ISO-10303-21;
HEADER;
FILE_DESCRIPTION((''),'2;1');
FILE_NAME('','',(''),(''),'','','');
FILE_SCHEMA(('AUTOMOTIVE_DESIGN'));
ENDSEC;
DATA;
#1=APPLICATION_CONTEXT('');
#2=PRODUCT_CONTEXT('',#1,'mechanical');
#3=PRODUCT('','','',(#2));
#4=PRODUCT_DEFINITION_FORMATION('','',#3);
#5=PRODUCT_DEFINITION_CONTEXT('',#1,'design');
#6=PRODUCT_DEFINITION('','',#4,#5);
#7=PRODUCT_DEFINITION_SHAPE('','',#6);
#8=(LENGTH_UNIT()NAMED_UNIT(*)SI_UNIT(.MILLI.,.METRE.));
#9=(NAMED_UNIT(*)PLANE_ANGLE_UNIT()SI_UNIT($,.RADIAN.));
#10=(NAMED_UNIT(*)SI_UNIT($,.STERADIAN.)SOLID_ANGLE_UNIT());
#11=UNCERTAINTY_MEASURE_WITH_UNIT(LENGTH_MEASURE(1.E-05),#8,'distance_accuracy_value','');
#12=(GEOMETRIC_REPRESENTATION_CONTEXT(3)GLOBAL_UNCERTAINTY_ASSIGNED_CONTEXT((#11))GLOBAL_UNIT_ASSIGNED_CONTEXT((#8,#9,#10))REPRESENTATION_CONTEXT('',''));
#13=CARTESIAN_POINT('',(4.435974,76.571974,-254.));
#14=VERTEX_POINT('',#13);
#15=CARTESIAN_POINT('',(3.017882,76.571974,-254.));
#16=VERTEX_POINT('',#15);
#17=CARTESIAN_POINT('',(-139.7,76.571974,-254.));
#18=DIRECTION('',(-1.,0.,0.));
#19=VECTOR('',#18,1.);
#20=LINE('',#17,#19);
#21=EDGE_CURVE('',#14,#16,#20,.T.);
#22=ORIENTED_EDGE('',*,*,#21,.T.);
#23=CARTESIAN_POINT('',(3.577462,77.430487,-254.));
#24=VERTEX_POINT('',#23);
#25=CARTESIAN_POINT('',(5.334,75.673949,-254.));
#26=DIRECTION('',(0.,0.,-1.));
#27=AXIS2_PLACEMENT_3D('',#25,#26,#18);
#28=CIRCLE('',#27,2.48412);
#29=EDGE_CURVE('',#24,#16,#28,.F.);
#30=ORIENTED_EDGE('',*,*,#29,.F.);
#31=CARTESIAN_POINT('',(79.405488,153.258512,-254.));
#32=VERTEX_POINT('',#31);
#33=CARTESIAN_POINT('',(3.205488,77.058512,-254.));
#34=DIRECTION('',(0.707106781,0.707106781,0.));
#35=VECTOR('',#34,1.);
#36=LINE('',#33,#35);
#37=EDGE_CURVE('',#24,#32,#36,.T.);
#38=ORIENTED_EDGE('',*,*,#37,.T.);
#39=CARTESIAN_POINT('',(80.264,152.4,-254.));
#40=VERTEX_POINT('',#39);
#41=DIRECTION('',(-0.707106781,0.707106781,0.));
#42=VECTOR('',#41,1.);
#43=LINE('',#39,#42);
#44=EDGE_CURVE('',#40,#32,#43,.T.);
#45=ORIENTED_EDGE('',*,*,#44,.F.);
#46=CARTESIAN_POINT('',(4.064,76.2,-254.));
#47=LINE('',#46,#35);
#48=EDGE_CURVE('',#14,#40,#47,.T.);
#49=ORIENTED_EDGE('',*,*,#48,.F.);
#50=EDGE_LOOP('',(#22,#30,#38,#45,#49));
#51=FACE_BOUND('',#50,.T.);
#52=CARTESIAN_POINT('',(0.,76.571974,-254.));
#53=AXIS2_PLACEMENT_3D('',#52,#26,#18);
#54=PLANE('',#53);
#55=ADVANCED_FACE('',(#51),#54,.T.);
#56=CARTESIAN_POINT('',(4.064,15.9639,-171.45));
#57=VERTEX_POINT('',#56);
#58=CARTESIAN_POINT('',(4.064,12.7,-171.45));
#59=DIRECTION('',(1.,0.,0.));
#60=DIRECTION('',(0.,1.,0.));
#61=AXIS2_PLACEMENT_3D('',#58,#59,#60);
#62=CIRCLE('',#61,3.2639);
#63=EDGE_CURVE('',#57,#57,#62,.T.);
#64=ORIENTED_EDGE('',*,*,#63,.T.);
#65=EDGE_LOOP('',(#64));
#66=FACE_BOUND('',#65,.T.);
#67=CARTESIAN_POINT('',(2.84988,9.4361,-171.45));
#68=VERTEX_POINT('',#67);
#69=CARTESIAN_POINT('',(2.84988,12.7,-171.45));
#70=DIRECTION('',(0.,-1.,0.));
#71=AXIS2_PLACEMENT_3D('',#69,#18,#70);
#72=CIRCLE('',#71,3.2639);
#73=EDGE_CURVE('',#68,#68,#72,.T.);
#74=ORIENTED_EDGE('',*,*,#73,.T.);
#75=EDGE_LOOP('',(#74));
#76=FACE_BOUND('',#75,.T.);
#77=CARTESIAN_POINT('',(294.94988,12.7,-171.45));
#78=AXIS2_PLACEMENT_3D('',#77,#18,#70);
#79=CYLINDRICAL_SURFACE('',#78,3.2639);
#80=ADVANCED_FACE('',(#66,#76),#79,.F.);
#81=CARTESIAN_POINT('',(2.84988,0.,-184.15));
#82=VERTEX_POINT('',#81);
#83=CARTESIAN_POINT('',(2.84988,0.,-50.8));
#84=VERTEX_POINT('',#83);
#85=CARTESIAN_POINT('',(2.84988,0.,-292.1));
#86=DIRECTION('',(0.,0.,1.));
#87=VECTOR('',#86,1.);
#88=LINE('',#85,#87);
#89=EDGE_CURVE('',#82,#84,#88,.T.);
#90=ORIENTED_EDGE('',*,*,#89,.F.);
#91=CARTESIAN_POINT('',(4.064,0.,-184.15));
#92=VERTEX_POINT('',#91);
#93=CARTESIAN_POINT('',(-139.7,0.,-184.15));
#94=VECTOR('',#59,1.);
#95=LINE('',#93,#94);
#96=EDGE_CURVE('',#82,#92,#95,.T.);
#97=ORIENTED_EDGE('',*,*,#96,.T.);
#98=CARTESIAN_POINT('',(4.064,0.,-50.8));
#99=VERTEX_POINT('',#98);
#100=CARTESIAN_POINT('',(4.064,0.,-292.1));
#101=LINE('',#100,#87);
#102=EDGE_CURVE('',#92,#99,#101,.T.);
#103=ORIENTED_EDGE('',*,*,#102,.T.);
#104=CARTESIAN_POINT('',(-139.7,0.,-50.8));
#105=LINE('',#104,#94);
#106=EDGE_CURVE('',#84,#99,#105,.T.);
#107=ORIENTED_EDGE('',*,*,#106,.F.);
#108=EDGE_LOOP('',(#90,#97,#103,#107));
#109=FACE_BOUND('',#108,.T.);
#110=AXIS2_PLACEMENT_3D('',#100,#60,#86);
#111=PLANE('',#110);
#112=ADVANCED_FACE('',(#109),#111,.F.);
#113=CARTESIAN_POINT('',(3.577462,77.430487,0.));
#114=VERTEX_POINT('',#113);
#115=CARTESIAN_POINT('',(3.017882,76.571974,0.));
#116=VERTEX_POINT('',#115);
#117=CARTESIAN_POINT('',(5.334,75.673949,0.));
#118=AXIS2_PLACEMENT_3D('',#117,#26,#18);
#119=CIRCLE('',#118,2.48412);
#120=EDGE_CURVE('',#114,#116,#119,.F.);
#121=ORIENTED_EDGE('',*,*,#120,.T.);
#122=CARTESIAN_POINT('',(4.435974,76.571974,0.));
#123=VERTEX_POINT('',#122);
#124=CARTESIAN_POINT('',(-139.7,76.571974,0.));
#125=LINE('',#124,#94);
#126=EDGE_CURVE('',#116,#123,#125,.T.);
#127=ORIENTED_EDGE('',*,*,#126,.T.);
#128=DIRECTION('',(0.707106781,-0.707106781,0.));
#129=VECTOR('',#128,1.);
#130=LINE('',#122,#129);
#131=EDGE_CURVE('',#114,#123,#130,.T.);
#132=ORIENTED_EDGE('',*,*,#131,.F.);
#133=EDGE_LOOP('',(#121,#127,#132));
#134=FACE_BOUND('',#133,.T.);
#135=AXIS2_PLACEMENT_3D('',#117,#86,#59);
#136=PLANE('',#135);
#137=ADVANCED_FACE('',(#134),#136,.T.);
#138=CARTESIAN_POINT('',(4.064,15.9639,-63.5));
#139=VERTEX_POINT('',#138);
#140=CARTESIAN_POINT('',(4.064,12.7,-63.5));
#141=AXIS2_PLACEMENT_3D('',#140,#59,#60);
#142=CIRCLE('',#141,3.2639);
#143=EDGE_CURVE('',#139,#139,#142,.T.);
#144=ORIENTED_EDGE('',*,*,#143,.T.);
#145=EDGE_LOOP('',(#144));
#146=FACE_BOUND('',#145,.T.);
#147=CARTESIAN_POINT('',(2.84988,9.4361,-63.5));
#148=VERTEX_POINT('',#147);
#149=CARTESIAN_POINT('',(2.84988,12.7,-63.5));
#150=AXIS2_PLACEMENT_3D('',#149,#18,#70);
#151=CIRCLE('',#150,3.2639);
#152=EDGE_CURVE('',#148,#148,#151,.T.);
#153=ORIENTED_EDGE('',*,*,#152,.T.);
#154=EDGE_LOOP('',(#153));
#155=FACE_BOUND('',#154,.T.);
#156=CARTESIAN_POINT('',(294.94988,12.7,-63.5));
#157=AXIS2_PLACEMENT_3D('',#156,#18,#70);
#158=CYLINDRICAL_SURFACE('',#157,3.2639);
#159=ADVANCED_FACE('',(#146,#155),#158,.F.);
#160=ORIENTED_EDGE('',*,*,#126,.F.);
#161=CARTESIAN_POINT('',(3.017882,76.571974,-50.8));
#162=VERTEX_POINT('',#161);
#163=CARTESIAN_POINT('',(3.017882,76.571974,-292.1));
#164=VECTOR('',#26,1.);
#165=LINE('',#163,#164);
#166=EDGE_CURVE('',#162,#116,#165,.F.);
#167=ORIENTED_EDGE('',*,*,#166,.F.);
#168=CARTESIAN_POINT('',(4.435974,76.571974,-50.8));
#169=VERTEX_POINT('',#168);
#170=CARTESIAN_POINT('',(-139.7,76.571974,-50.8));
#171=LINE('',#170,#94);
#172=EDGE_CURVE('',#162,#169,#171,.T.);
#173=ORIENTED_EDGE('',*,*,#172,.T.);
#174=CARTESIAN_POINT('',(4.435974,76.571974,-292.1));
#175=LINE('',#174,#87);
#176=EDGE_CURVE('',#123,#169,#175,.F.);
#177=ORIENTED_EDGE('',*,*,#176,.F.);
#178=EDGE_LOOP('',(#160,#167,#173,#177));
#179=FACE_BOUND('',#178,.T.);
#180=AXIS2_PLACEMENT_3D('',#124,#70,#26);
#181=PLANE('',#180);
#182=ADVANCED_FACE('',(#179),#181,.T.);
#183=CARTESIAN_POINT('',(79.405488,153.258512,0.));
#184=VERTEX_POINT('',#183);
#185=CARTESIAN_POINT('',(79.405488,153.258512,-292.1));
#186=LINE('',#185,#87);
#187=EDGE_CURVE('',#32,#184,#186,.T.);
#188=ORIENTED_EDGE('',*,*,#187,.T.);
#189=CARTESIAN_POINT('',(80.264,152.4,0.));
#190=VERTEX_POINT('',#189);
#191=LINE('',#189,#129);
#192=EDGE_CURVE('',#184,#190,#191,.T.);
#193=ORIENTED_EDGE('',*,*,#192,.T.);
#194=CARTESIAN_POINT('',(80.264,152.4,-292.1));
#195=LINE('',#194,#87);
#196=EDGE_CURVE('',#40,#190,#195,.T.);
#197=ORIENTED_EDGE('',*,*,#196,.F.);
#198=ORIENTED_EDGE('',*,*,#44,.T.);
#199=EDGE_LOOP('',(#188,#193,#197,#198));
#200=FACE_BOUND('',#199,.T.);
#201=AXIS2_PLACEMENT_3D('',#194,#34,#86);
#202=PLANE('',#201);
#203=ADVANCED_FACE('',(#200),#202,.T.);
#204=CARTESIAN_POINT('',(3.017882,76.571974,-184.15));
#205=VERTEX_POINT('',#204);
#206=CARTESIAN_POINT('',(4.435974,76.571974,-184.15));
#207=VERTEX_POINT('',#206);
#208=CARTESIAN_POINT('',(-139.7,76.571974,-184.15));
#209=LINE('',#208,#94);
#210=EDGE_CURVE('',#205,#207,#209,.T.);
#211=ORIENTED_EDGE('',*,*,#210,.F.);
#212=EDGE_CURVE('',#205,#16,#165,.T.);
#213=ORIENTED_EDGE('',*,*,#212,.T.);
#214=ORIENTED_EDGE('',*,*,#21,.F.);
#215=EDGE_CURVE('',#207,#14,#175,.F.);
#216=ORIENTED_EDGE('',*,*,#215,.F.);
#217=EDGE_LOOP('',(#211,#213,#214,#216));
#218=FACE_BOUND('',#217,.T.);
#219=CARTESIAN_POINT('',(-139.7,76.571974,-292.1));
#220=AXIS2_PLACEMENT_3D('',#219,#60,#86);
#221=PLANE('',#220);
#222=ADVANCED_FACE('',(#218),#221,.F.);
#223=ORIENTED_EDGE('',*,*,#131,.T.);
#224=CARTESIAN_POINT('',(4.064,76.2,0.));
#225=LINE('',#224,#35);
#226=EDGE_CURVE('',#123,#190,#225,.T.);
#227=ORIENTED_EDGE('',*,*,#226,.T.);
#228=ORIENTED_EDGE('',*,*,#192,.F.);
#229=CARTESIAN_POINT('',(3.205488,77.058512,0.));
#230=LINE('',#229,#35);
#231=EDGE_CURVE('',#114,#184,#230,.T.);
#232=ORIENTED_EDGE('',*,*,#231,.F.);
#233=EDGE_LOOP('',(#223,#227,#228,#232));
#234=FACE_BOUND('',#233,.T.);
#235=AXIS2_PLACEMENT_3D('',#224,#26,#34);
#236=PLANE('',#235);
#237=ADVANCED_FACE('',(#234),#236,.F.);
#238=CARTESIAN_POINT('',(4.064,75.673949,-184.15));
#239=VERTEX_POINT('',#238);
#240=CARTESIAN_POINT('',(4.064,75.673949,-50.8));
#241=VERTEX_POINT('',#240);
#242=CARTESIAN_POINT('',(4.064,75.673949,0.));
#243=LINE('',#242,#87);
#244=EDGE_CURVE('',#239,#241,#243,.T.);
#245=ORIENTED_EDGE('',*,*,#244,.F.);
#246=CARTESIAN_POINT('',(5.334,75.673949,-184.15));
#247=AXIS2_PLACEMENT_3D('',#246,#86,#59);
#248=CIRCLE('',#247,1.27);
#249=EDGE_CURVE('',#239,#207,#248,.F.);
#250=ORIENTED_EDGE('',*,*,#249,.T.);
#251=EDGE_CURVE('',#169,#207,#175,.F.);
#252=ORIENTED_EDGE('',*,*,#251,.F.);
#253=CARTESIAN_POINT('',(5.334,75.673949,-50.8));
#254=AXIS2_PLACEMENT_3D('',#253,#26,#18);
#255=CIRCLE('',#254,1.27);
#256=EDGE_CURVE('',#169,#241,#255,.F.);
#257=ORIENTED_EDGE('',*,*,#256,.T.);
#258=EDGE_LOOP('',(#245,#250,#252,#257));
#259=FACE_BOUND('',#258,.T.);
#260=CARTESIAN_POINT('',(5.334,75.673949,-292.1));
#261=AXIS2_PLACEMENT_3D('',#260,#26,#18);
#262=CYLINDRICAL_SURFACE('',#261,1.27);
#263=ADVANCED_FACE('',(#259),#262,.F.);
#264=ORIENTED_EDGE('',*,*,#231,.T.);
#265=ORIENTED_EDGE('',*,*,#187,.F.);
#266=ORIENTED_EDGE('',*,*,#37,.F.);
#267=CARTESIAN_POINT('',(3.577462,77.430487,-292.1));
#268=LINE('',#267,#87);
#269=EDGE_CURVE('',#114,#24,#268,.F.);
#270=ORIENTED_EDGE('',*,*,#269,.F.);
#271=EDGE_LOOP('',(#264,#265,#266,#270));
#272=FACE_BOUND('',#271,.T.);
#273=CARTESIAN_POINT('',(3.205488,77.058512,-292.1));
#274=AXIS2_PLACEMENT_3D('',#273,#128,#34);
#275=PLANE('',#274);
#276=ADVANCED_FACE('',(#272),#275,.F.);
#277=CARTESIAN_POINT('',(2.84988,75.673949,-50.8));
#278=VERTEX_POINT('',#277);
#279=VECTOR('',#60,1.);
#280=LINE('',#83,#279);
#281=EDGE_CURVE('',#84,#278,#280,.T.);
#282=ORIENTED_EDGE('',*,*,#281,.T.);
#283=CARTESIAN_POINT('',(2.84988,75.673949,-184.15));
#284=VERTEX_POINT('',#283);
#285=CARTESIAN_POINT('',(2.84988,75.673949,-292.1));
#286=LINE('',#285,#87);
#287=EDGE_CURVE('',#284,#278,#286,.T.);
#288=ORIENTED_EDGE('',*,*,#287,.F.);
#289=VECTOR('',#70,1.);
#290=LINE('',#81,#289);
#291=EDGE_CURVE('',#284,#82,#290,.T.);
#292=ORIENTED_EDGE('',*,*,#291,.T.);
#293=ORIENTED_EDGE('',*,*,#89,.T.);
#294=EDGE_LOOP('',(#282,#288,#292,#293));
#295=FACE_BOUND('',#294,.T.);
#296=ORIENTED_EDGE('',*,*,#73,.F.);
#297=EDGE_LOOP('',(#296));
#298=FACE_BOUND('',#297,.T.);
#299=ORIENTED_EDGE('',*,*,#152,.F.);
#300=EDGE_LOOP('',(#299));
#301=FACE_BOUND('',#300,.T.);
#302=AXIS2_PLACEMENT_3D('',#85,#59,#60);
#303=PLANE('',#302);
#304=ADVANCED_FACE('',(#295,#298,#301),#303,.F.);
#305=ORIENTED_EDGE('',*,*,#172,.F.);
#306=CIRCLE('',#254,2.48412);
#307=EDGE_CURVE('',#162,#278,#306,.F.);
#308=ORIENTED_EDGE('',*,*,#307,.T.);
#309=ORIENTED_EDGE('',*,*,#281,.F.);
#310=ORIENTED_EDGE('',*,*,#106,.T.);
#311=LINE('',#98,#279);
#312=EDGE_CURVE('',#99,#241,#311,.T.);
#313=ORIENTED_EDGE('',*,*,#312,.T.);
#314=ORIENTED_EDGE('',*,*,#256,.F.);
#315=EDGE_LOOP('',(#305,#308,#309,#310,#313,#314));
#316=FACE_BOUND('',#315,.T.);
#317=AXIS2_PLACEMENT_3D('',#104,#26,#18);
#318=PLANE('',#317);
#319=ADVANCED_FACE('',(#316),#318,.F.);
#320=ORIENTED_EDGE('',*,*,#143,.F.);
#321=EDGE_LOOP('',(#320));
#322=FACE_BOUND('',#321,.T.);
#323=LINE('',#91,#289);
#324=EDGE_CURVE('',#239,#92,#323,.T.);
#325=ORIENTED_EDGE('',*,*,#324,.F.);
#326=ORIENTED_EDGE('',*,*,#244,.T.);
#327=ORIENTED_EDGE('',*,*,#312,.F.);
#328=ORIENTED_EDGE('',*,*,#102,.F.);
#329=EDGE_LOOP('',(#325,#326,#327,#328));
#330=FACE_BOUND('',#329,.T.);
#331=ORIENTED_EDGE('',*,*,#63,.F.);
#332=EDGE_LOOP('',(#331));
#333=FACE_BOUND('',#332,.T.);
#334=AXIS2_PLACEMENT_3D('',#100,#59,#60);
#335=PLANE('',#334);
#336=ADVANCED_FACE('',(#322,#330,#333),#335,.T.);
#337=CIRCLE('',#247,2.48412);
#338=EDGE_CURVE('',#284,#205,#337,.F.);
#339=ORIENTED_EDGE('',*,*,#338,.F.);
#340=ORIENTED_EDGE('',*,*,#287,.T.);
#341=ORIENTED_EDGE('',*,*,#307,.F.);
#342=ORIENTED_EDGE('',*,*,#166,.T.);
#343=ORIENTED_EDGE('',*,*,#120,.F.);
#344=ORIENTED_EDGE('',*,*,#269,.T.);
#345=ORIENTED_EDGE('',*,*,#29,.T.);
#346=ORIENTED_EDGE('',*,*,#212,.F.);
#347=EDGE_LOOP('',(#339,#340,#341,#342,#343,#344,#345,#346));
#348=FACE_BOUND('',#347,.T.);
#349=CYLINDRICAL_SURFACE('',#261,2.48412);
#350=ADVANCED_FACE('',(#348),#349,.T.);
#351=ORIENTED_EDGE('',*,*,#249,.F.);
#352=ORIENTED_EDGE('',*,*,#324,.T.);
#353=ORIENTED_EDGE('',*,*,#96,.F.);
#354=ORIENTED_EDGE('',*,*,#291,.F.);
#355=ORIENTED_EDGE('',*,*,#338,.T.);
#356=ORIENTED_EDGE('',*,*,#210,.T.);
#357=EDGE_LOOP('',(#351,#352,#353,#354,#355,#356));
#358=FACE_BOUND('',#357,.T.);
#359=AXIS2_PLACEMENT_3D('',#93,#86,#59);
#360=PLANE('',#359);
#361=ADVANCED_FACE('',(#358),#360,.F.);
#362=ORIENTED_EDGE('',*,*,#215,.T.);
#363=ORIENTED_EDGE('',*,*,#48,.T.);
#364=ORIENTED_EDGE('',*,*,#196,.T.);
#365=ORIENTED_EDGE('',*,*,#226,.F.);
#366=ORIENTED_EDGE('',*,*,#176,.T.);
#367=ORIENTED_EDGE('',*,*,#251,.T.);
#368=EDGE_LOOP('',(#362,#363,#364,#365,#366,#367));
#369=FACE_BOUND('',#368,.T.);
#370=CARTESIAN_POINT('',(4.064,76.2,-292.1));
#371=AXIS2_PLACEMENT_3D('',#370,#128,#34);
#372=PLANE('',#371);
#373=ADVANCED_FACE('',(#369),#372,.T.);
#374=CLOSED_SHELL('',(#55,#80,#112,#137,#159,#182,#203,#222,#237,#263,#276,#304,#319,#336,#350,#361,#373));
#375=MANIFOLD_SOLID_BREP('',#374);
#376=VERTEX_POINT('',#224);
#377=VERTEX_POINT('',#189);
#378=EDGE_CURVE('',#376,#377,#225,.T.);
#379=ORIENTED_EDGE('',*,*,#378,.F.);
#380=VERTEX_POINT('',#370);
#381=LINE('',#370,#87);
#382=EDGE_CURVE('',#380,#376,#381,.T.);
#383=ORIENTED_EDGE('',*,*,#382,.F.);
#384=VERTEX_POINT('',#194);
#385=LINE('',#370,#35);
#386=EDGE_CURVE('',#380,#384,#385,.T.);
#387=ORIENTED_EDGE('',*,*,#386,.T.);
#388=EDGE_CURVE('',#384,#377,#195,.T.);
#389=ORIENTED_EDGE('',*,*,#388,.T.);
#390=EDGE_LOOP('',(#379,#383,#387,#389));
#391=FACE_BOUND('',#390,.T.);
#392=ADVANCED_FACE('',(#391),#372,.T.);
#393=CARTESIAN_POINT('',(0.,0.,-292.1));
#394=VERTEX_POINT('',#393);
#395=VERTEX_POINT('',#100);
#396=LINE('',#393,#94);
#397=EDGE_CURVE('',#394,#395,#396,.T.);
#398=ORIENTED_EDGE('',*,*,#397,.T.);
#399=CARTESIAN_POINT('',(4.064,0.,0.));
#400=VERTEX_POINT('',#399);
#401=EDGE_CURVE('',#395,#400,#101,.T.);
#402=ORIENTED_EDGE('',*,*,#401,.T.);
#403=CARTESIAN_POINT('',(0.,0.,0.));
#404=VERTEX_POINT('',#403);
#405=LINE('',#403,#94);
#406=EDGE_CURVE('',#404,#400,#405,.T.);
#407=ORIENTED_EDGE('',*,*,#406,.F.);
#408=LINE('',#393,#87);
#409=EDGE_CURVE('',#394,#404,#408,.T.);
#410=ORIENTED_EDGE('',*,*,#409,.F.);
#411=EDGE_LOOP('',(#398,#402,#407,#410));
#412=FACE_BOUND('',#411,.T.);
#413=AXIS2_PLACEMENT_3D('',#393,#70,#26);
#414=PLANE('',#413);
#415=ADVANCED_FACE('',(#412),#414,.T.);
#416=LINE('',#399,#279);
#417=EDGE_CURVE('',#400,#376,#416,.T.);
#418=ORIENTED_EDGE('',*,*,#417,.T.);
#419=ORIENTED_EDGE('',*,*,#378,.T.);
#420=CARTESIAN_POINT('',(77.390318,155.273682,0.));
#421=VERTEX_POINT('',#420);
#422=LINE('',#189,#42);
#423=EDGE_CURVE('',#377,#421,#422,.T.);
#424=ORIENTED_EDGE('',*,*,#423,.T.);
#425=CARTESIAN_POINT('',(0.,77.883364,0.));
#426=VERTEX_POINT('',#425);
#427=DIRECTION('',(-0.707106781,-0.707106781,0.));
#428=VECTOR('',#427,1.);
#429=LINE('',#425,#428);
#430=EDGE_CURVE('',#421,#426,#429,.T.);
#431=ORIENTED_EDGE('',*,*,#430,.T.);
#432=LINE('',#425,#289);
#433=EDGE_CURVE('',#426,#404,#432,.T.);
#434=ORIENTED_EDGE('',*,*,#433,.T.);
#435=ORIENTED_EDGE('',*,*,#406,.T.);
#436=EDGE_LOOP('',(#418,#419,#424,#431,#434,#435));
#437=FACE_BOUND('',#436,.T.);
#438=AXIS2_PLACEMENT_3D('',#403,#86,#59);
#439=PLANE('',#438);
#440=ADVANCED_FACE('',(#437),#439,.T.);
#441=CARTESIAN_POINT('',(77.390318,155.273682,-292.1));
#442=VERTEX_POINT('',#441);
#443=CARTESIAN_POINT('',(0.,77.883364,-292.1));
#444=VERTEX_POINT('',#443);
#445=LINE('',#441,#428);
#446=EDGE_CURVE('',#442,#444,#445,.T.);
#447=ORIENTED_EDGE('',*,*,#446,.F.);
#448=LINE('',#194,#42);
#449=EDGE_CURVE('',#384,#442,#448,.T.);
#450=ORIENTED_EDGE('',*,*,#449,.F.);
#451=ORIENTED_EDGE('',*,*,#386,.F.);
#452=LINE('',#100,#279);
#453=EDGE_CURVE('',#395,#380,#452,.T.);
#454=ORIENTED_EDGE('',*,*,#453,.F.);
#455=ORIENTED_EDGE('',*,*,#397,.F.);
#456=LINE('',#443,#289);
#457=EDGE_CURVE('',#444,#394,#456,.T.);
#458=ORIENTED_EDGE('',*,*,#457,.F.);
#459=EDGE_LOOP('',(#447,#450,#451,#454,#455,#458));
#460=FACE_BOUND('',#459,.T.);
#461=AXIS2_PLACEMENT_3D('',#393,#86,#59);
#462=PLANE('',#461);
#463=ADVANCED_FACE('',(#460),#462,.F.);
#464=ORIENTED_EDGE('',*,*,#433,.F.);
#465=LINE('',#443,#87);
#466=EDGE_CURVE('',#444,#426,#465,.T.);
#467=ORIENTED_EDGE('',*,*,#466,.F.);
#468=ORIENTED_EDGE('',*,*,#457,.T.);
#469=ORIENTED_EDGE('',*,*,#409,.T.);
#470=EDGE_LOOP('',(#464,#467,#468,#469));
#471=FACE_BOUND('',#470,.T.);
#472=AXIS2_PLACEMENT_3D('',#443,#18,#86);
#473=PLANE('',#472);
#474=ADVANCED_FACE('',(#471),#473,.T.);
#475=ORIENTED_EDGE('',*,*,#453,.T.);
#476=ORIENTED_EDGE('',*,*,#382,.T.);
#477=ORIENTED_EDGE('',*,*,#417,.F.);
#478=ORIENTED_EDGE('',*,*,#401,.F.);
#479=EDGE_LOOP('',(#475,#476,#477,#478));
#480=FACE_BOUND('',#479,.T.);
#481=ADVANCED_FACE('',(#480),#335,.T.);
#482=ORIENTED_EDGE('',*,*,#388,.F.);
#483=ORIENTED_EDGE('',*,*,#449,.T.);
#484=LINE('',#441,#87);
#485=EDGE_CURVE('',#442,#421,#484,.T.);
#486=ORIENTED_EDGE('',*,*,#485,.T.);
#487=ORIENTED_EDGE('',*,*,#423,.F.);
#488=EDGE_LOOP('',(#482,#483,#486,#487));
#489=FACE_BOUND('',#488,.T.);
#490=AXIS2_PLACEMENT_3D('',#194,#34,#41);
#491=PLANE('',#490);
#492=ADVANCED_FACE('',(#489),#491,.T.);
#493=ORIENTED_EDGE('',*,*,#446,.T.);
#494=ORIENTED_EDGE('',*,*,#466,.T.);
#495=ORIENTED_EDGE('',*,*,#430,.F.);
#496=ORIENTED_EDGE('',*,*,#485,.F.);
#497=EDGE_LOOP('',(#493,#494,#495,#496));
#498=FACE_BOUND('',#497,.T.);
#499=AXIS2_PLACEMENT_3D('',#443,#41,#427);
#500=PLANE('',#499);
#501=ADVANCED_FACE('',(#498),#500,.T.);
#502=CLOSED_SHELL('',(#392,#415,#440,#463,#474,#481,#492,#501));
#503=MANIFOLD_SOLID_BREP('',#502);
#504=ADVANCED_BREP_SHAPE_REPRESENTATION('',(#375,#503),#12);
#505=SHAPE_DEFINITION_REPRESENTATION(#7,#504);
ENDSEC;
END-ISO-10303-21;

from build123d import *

# Parameters (mm, degrees)
BOSS_EXTRUDE2_DEPTH  = 292.1
CONVERT_SOLID2_START = -292.1
CONVERT_SOLID2_DEPTH = 292.1
SKETCH12_W           = 50.8
SKETCH12_H           = 76.571974388
CUT_EXTRUDE1_DEPTH   = 292.1
SKETCH13_W           = 107.95
SKETCH13_H           = 76.571974388
CUT_EXTRUDE2_DEPTH   = 292.1
SKETCH14_R           = 3.2639
CUT_EXTRUDE3_DEPTH   = 292.1
SKETCH16_W           = 38.1
SKETCH16_H           = 76.686538097
CUT_EXTRUDE4_DEPTH   = 365.222577978


# Read off the part's stored shape, not the designer's step: Convert-Solid2
with BuildPart() as part:
    # Sketch7 → Boss-Extrude2 (new body)
    with BuildSketch(Plane.XY):
        Polygon((0, 0), (4.064, 0), (4.064, 76.2), (80.264, 152.4), (77.390318041, 155.273681959), (77.208487056, 155.091850973), (0, 77.883363917), align=None)
    extrude(amount=-BOSS_EXTRUDE2_DEPTH)


with BuildPart() as body_2:
    # Convert-Solid2 outline → Convert-Solid2 (new body)
    with BuildSketch(Plane.XY.offset(CONVERT_SOLID2_START)):
        with BuildLine():
            Line((2.84988, 0), (4.064, 0))
            Line((4.064, 0), (4.064, 75.673948776))
            ThreePointArc((4.064, 75.673948776), (4.160672994, 76.159956735), (4.435974388, 76.571974388))
            Line((4.435974388, 76.571974388), (80.264, 152.4))
            Line((80.264, 152.4), (79.405487515, 153.258512485))
            Line((79.405487515, 153.258512485), (3.577461903, 77.430486873))
            ThreePointArc((3.577461903, 77.430486873), (3.038972376, 76.624580344), (2.84988, 75.673948776))
            Line((2.84988, 75.673948776), (2.84988, 0))
        make_face()
    extrude(amount=CONVERT_SOLID2_DEPTH)

    # Sketch12 → Cut-Extrude1 (cut)
    with BuildSketch(Plane(origin=(152.4, 0, 0), x_dir=(0, 0, -1), z_dir=(1, 0, 0))):
        with Locations((25.4, 38.285987194)):
            Rectangle(SKETCH12_W, SKETCH12_H)
    extrude(amount=-CUT_EXTRUDE1_DEPTH, mode=Mode.SUBTRACT)

    # Sketch13 → Cut-Extrude2 (cut)
    with BuildSketch(Plane(origin=(152.4, 0, 0), x_dir=(0, 0, -1), z_dir=(1, 0, 0))):
        with Locations((238.125, 38.285987194)):
            Rectangle(SKETCH13_W, SKETCH13_H)
    extrude(amount=-CUT_EXTRUDE2_DEPTH, mode=Mode.SUBTRACT)

    # Sketch14 → Cut-Extrude3 (cut)
    with BuildSketch(Plane.ZY.offset(-2.84988)):
        with Locations(Location((-171.45, 12.7, 0), (0, 0, 270))):
            Circle(SKETCH14_R)
        with Locations(Location((-63.5, 12.7, 0), (0, 0, 270))):
            Circle(SKETCH14_R)
    extrude(amount=-CUT_EXTRUDE3_DEPTH, mode=Mode.SUBTRACT)

    # Sketch16 → Cut-Extrude4 (cut, through all)
    with BuildSketch(Plane(origin=(152.4, 0, 0), x_dir=(0, 0, -1), z_dir=(1, 0, 0))):
        with Locations((273.05, 114.915243437)):
            Rectangle(SKETCH16_W, SKETCH16_H)
    extrude(amount=-CUT_EXTRUDE4_DEPTH, mode=Mode.SUBTRACT)


solid = Compound([part.part, body_2.part])
